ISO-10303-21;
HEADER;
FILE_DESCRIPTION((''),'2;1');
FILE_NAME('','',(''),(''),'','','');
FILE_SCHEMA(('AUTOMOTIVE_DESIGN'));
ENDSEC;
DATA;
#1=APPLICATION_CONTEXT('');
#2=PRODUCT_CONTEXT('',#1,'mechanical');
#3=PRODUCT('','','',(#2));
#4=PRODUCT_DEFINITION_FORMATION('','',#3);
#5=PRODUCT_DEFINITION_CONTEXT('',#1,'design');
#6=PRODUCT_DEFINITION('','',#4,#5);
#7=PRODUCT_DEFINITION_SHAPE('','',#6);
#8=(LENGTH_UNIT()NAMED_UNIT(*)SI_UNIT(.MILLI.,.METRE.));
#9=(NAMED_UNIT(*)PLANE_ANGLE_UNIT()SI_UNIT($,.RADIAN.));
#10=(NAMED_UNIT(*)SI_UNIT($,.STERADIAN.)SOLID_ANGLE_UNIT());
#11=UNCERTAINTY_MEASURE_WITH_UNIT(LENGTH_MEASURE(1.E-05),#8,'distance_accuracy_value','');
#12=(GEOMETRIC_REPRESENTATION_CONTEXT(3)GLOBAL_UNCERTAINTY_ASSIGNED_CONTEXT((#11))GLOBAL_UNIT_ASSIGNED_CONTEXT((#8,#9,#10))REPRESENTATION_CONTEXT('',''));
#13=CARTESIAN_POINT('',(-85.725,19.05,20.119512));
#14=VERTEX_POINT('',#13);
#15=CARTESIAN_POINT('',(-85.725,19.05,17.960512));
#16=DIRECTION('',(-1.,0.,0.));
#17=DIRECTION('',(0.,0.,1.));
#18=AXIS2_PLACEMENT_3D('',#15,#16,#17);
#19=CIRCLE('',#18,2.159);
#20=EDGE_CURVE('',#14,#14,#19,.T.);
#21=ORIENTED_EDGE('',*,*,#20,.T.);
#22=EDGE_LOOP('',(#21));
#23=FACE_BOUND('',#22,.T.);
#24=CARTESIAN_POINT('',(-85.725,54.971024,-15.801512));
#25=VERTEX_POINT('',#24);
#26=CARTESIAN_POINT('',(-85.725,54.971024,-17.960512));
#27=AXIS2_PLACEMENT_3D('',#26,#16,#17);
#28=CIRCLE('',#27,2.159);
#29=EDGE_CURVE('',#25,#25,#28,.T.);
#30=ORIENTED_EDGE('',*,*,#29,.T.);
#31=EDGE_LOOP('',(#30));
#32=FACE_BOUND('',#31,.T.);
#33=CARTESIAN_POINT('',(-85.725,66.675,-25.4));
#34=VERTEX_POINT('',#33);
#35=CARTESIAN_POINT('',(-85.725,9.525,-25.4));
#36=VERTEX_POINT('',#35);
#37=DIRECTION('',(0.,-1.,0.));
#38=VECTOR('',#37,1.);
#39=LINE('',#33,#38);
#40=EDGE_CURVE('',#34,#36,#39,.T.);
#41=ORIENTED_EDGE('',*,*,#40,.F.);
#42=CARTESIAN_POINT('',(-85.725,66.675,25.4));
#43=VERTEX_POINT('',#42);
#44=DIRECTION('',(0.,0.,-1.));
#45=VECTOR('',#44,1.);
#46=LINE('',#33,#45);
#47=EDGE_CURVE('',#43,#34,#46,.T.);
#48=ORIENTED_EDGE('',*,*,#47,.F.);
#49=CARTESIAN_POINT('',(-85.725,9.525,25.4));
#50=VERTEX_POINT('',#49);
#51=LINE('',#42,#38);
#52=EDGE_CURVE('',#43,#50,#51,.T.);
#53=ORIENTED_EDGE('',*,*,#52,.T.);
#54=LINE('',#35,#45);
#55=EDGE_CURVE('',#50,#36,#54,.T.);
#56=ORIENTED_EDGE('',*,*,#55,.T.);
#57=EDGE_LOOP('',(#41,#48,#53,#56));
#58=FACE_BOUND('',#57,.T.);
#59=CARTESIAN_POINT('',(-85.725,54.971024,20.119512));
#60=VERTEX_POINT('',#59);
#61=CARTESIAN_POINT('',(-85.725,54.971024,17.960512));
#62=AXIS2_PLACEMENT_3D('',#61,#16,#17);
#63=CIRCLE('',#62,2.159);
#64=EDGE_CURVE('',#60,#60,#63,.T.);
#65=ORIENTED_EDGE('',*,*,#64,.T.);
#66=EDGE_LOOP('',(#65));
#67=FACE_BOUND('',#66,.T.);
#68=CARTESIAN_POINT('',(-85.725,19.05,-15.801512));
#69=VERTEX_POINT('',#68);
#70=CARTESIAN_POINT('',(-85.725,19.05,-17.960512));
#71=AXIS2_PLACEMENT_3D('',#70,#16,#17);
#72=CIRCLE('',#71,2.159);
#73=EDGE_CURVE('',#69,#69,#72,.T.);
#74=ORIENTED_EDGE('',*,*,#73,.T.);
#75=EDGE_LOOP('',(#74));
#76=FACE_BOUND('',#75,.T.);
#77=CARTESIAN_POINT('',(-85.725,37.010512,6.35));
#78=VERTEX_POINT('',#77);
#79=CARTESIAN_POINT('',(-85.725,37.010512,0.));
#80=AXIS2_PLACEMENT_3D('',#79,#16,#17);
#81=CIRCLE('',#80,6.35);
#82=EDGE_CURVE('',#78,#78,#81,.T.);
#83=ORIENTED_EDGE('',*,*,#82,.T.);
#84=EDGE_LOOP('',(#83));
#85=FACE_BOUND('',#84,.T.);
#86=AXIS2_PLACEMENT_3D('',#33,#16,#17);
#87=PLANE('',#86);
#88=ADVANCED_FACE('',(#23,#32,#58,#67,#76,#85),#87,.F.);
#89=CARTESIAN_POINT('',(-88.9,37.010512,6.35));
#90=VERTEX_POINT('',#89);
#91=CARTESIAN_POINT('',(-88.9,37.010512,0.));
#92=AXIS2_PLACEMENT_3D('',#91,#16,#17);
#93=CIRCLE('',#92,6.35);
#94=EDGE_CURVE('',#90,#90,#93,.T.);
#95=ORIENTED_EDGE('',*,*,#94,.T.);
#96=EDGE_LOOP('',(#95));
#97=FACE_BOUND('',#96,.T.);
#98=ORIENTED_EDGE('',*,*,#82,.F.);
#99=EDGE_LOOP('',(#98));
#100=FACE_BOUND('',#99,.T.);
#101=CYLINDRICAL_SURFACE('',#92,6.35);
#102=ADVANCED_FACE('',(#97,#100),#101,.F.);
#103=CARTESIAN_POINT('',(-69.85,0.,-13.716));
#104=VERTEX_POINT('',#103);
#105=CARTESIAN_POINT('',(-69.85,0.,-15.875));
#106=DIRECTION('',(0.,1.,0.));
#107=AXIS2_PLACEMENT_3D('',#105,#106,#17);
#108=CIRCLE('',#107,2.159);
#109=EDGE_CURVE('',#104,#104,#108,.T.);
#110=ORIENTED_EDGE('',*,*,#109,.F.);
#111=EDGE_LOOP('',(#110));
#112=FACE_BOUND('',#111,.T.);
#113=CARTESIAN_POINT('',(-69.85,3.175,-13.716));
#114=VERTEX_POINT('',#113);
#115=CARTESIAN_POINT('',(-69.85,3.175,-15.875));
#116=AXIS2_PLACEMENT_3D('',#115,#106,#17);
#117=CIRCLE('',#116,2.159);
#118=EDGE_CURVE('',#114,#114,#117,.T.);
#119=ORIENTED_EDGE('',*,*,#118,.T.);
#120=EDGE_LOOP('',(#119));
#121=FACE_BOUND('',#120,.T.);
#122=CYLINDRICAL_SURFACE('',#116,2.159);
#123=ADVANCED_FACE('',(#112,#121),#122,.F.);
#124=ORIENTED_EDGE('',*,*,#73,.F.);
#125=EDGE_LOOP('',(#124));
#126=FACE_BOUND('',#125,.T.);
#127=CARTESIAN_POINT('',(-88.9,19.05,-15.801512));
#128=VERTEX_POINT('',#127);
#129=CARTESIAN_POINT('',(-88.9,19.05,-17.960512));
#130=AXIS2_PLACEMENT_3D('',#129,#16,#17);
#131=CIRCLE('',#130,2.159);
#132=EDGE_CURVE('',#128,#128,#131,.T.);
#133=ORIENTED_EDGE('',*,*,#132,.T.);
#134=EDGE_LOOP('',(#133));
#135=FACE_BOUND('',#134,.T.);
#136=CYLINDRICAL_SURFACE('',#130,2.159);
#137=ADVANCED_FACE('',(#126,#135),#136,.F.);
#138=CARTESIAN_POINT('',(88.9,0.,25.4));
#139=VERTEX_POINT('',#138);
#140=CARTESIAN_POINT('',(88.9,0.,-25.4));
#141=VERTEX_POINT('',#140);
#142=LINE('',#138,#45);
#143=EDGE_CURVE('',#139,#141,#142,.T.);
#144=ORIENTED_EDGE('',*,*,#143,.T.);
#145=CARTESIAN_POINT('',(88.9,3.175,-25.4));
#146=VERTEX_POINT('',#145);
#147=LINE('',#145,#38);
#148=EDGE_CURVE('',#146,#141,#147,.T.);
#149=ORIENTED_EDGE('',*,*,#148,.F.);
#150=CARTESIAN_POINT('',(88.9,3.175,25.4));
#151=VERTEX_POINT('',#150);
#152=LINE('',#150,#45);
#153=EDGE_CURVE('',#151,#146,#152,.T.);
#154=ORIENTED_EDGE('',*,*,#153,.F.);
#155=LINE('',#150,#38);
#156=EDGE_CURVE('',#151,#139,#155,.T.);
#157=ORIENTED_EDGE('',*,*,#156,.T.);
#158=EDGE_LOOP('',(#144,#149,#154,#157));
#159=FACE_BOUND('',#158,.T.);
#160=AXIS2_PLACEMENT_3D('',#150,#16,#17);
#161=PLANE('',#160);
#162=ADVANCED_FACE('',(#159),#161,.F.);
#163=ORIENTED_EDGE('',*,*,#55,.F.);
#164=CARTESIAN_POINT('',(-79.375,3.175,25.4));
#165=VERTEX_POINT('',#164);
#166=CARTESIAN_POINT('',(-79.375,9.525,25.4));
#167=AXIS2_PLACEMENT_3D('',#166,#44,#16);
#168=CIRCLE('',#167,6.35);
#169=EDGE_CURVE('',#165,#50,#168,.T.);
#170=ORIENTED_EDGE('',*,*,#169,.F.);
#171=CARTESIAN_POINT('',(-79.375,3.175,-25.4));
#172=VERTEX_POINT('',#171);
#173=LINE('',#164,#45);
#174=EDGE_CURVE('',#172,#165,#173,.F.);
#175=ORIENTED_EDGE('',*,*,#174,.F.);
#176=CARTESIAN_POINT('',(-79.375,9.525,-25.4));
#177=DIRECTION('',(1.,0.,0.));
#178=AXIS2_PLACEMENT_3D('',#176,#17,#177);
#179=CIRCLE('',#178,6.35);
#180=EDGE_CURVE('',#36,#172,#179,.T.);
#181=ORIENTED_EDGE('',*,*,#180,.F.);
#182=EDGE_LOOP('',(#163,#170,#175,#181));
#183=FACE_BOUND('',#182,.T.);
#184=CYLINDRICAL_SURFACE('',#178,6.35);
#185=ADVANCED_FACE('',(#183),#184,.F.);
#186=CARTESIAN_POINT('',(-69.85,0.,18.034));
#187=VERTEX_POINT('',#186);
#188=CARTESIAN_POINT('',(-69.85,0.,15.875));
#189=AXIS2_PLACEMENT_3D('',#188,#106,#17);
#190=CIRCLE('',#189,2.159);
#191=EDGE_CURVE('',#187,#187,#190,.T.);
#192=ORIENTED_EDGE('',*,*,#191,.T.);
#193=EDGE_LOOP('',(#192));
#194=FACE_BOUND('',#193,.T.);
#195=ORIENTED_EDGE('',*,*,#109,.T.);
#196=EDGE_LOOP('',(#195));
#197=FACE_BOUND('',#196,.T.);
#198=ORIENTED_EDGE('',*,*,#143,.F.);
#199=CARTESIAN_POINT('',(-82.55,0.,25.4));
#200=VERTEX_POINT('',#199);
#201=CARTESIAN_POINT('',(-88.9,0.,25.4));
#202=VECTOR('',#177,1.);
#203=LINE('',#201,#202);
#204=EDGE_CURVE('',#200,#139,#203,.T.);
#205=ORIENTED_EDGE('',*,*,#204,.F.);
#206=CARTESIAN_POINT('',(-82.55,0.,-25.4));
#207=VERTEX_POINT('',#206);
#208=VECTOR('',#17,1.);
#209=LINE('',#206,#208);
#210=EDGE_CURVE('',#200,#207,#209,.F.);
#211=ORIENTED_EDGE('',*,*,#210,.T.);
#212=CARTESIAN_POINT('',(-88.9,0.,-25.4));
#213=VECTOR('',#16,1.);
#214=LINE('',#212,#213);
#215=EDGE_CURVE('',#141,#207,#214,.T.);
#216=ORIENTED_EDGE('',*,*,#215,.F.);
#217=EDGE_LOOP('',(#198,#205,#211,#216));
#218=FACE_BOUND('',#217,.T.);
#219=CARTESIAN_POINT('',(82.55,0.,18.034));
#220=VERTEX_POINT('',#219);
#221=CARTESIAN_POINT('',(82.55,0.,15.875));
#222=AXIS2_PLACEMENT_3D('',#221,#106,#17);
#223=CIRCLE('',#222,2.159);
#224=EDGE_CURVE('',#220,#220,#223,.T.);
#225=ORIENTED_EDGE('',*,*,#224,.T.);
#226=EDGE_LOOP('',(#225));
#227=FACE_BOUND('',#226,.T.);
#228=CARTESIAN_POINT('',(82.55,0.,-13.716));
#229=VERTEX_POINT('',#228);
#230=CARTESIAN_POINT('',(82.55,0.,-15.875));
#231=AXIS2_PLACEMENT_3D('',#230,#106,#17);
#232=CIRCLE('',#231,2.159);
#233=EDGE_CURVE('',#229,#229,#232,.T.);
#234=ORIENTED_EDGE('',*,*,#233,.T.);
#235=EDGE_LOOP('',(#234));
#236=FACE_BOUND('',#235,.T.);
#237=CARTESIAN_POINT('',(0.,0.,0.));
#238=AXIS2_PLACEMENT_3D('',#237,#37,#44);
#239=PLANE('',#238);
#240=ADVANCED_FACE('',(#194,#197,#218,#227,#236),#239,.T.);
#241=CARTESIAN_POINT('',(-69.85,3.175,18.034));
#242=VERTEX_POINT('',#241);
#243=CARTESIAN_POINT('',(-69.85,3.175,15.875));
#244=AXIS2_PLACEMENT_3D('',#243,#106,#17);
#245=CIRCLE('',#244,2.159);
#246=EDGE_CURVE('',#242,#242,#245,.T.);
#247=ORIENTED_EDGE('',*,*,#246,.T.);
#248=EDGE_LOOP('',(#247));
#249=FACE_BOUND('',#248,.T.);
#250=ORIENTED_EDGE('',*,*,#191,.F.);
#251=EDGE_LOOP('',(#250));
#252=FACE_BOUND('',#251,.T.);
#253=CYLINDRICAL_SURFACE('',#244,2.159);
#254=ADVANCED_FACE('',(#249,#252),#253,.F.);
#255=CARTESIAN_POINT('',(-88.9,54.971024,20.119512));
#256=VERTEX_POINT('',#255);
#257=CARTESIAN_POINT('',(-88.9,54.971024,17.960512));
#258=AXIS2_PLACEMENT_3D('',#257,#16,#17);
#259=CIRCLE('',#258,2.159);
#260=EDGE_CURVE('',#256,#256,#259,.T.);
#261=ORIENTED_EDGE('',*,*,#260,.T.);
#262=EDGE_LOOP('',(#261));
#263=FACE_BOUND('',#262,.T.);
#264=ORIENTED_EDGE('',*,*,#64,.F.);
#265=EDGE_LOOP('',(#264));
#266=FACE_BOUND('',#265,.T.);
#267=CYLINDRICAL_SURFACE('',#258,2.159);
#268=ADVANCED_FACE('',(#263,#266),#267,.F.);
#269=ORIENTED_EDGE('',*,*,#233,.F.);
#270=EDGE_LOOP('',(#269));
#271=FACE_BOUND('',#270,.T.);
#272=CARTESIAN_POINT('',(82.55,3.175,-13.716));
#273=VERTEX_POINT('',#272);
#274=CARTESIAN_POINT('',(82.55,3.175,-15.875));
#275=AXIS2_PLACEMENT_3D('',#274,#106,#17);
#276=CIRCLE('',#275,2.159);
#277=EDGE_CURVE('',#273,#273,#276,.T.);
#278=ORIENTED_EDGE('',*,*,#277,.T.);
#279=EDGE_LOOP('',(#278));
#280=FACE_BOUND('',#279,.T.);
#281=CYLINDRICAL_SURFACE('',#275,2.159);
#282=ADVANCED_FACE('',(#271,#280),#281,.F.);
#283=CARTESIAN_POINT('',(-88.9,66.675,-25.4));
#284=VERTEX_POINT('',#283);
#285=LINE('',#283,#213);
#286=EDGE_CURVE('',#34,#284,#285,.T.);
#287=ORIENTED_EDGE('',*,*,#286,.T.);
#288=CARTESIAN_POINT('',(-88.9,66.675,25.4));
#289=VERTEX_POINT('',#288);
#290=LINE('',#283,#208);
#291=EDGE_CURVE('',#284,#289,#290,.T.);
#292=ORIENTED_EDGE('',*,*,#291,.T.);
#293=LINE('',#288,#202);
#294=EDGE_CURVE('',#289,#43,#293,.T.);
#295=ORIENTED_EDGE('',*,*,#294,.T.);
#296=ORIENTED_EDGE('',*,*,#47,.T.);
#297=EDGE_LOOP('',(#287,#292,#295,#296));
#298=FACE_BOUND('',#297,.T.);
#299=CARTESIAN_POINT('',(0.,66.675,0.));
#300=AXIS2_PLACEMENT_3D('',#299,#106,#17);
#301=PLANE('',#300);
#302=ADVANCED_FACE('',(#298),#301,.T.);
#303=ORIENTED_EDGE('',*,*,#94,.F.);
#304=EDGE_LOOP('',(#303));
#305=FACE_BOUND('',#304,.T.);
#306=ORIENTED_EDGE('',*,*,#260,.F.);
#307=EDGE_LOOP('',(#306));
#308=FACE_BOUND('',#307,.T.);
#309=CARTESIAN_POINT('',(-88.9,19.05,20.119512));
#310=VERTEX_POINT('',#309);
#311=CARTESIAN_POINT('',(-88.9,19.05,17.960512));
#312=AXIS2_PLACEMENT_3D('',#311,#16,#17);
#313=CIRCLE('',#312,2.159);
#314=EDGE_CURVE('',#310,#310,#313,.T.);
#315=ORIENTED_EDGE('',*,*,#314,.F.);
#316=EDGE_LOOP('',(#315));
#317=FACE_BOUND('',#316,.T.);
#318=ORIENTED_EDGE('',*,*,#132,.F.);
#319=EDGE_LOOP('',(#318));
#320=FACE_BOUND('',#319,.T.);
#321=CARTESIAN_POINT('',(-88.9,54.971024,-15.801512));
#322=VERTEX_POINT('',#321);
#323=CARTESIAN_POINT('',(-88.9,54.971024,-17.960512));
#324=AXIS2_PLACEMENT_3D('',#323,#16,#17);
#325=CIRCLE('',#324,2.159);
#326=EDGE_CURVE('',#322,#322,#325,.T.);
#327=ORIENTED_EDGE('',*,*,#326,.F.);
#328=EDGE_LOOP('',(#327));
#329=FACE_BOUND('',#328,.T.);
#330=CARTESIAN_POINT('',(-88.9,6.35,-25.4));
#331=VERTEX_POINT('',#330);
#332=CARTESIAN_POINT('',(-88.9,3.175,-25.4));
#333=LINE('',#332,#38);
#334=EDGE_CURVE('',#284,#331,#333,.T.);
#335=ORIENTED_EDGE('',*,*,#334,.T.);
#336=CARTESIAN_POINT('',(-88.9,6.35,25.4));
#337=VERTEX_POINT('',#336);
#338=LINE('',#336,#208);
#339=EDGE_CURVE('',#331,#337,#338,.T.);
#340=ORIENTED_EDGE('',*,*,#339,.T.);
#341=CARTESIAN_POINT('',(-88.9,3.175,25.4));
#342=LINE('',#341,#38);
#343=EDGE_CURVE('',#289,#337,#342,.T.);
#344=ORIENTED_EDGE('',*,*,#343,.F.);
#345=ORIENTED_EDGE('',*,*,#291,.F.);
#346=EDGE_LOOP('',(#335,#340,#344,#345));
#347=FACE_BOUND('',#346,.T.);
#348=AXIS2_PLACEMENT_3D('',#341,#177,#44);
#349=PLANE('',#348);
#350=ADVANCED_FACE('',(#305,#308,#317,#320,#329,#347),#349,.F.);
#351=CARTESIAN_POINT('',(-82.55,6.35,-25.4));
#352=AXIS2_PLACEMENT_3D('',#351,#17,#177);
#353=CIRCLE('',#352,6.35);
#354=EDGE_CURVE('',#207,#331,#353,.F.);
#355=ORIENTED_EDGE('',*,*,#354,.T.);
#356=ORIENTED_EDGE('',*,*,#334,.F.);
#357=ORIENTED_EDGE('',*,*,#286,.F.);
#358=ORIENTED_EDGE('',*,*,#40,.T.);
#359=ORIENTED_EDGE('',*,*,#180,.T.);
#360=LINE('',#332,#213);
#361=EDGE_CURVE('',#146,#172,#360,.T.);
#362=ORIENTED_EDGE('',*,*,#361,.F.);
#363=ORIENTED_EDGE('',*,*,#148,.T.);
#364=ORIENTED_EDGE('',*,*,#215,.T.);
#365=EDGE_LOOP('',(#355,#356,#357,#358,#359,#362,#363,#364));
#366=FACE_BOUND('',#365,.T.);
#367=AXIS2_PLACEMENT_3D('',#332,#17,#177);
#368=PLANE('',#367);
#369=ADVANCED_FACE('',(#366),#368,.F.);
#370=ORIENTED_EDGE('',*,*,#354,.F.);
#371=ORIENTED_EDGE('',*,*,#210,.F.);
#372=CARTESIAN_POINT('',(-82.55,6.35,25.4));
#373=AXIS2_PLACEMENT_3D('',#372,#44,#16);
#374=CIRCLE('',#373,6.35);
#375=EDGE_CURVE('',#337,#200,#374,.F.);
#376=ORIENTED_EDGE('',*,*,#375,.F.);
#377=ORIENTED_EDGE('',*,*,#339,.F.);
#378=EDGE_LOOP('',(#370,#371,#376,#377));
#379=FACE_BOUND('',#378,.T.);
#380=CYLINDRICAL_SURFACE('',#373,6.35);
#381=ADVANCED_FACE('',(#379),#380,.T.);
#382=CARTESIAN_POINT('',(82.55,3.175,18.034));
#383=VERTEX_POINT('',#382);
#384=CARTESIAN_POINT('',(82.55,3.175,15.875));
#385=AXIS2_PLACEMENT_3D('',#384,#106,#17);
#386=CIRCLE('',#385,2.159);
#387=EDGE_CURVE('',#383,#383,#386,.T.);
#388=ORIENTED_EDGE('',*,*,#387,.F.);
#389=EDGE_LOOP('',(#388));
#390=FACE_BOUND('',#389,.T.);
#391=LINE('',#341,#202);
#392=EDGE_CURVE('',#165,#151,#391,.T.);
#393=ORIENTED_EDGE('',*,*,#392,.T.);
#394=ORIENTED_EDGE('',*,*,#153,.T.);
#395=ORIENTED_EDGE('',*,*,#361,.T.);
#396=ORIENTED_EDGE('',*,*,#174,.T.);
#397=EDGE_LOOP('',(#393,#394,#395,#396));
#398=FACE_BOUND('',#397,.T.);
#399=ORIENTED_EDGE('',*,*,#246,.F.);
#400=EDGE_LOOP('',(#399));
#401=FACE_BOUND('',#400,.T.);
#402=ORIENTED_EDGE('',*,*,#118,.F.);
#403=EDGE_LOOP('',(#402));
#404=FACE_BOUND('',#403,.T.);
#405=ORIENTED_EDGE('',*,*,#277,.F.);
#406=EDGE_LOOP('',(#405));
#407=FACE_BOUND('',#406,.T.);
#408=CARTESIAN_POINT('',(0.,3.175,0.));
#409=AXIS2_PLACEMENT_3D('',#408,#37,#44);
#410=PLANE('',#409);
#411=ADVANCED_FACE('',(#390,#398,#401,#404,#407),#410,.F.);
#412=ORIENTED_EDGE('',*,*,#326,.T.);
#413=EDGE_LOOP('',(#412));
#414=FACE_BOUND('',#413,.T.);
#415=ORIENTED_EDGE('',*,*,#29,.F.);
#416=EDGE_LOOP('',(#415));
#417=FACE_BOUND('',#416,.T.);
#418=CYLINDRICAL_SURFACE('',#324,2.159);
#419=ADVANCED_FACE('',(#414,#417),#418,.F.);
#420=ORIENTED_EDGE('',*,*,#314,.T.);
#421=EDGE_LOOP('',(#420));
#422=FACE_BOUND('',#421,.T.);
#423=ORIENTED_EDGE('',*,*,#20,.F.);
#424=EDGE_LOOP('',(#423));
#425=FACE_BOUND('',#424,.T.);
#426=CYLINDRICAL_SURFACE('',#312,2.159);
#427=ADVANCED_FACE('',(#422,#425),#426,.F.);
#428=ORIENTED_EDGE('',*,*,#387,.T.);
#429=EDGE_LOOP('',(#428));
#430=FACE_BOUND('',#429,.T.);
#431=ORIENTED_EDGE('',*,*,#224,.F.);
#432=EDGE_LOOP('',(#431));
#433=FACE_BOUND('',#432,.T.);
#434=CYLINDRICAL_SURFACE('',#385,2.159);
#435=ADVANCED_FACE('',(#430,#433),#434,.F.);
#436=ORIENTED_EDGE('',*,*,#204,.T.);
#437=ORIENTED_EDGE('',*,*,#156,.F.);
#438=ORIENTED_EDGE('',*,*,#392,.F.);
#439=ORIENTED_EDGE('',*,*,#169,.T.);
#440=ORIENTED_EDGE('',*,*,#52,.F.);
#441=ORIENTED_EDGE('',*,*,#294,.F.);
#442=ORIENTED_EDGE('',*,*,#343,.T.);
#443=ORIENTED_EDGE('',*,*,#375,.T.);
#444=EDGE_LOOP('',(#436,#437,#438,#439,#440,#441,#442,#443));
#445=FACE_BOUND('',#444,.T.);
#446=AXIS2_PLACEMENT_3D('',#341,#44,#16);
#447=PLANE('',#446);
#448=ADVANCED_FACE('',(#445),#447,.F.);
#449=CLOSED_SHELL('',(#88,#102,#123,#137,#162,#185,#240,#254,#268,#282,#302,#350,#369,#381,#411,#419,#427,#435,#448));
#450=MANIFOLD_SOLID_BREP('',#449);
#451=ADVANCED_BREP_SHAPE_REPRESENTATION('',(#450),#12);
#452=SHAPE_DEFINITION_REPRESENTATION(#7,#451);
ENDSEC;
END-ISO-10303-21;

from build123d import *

# Parameters (mm, degrees)
SKETCH1_W               = 177.8
SKETCH1_H               = 50.8
BOSS_EXTRUDE1_DEPTH     = 3.175
SKETCH2_W               = 3.175
SKETCH2_H               = 50.8
BOSS_EXTRUDE2_DEPTH     = 63.5
FILLET1_R               = 6.35
F_1_0MM_DOWEL_HOLE1_D   = 4.318
F_1_0MM_DOWEL_HOLE2_D   = 12.7
ADVANCEDHOLE1_OUTLINE_R = 2.159
ADVANCEDHOLE1_DEPTH     = 3.175


# Read off the part's stored shape, not the designer's step: AdvancedHole1
with BuildPart() as part:
    # Sketch1 → Boss-Extrude1 (new body)
    with BuildSketch(Plane(origin=(0, 0, 0), x_dir=(1, 0, 0), z_dir=(0, 1, 0))):
        Rectangle(SKETCH1_W, SKETCH1_H)
    extrude(amount=BOSS_EXTRUDE1_DEPTH)

    # Sketch2 → Boss-Extrude2 (add)
    with BuildSketch(Plane(origin=(0, 3.175, 0), x_dir=(1, 0, 0), z_dir=(0, 1, 0))):
        with Locations((-87.3125, 0)):
            Rectangle(SKETCH2_W, SKETCH2_H)
    extrude(amount=BOSS_EXTRUDE2_DEPTH)

    # Fillet1
    fillet1_edges = [part.edges().sort_by_distance(p)[0] for p in [
        (-85.725, 3.175, 0),
        (-88.9, 0, 0),
    ]]
    fillet(fillet1_edges, radius=FILLET1_R)

    # Ø1.0mm Dowel Hole1 (through all)
    with Locations(Plane.ZY.offset(88.9)):
        with Locations((-17.960512212, 54.971024484), (17.960512272, 54.971024484), (17.960512272, 19.05), (-17.960512212, 19.05)):
            Hole(F_1_0MM_DOWEL_HOLE1_D / 2)

    # Ø1.0mm Dowel Hole2 (through all)
    with Locations(Plane(origin=(-88.9, 37.010512242, 3e-08), x_dir=(0, 0, -1), z_dir=(-1, 0, 0))):
        with Locations((0, 0)):
            Hole(F_1_0MM_DOWEL_HOLE2_D / 2)

    # AdvancedHole1 outline → AdvancedHole1 (cut)
    with BuildSketch(Plane(origin=(0, 0, 0), x_dir=(1, 0, 0), z_dir=(0, 1, 0))):
        with Locations((-69.85, -15.875)):
            Circle(ADVANCEDHOLE1_OUTLINE_R)
        with Locations((-69.85, 15.875)):
            Circle(ADVANCEDHOLE1_OUTLINE_R)
        with Locations((82.55, 15.875)):
            Circle(ADVANCEDHOLE1_OUTLINE_R)
        with Locations((82.55, -15.875)):
            Circle(ADVANCEDHOLE1_OUTLINE_R)
    extrude(amount=ADVANCEDHOLE1_DEPTH, mode=Mode.SUBTRACT)


solid = part.part
